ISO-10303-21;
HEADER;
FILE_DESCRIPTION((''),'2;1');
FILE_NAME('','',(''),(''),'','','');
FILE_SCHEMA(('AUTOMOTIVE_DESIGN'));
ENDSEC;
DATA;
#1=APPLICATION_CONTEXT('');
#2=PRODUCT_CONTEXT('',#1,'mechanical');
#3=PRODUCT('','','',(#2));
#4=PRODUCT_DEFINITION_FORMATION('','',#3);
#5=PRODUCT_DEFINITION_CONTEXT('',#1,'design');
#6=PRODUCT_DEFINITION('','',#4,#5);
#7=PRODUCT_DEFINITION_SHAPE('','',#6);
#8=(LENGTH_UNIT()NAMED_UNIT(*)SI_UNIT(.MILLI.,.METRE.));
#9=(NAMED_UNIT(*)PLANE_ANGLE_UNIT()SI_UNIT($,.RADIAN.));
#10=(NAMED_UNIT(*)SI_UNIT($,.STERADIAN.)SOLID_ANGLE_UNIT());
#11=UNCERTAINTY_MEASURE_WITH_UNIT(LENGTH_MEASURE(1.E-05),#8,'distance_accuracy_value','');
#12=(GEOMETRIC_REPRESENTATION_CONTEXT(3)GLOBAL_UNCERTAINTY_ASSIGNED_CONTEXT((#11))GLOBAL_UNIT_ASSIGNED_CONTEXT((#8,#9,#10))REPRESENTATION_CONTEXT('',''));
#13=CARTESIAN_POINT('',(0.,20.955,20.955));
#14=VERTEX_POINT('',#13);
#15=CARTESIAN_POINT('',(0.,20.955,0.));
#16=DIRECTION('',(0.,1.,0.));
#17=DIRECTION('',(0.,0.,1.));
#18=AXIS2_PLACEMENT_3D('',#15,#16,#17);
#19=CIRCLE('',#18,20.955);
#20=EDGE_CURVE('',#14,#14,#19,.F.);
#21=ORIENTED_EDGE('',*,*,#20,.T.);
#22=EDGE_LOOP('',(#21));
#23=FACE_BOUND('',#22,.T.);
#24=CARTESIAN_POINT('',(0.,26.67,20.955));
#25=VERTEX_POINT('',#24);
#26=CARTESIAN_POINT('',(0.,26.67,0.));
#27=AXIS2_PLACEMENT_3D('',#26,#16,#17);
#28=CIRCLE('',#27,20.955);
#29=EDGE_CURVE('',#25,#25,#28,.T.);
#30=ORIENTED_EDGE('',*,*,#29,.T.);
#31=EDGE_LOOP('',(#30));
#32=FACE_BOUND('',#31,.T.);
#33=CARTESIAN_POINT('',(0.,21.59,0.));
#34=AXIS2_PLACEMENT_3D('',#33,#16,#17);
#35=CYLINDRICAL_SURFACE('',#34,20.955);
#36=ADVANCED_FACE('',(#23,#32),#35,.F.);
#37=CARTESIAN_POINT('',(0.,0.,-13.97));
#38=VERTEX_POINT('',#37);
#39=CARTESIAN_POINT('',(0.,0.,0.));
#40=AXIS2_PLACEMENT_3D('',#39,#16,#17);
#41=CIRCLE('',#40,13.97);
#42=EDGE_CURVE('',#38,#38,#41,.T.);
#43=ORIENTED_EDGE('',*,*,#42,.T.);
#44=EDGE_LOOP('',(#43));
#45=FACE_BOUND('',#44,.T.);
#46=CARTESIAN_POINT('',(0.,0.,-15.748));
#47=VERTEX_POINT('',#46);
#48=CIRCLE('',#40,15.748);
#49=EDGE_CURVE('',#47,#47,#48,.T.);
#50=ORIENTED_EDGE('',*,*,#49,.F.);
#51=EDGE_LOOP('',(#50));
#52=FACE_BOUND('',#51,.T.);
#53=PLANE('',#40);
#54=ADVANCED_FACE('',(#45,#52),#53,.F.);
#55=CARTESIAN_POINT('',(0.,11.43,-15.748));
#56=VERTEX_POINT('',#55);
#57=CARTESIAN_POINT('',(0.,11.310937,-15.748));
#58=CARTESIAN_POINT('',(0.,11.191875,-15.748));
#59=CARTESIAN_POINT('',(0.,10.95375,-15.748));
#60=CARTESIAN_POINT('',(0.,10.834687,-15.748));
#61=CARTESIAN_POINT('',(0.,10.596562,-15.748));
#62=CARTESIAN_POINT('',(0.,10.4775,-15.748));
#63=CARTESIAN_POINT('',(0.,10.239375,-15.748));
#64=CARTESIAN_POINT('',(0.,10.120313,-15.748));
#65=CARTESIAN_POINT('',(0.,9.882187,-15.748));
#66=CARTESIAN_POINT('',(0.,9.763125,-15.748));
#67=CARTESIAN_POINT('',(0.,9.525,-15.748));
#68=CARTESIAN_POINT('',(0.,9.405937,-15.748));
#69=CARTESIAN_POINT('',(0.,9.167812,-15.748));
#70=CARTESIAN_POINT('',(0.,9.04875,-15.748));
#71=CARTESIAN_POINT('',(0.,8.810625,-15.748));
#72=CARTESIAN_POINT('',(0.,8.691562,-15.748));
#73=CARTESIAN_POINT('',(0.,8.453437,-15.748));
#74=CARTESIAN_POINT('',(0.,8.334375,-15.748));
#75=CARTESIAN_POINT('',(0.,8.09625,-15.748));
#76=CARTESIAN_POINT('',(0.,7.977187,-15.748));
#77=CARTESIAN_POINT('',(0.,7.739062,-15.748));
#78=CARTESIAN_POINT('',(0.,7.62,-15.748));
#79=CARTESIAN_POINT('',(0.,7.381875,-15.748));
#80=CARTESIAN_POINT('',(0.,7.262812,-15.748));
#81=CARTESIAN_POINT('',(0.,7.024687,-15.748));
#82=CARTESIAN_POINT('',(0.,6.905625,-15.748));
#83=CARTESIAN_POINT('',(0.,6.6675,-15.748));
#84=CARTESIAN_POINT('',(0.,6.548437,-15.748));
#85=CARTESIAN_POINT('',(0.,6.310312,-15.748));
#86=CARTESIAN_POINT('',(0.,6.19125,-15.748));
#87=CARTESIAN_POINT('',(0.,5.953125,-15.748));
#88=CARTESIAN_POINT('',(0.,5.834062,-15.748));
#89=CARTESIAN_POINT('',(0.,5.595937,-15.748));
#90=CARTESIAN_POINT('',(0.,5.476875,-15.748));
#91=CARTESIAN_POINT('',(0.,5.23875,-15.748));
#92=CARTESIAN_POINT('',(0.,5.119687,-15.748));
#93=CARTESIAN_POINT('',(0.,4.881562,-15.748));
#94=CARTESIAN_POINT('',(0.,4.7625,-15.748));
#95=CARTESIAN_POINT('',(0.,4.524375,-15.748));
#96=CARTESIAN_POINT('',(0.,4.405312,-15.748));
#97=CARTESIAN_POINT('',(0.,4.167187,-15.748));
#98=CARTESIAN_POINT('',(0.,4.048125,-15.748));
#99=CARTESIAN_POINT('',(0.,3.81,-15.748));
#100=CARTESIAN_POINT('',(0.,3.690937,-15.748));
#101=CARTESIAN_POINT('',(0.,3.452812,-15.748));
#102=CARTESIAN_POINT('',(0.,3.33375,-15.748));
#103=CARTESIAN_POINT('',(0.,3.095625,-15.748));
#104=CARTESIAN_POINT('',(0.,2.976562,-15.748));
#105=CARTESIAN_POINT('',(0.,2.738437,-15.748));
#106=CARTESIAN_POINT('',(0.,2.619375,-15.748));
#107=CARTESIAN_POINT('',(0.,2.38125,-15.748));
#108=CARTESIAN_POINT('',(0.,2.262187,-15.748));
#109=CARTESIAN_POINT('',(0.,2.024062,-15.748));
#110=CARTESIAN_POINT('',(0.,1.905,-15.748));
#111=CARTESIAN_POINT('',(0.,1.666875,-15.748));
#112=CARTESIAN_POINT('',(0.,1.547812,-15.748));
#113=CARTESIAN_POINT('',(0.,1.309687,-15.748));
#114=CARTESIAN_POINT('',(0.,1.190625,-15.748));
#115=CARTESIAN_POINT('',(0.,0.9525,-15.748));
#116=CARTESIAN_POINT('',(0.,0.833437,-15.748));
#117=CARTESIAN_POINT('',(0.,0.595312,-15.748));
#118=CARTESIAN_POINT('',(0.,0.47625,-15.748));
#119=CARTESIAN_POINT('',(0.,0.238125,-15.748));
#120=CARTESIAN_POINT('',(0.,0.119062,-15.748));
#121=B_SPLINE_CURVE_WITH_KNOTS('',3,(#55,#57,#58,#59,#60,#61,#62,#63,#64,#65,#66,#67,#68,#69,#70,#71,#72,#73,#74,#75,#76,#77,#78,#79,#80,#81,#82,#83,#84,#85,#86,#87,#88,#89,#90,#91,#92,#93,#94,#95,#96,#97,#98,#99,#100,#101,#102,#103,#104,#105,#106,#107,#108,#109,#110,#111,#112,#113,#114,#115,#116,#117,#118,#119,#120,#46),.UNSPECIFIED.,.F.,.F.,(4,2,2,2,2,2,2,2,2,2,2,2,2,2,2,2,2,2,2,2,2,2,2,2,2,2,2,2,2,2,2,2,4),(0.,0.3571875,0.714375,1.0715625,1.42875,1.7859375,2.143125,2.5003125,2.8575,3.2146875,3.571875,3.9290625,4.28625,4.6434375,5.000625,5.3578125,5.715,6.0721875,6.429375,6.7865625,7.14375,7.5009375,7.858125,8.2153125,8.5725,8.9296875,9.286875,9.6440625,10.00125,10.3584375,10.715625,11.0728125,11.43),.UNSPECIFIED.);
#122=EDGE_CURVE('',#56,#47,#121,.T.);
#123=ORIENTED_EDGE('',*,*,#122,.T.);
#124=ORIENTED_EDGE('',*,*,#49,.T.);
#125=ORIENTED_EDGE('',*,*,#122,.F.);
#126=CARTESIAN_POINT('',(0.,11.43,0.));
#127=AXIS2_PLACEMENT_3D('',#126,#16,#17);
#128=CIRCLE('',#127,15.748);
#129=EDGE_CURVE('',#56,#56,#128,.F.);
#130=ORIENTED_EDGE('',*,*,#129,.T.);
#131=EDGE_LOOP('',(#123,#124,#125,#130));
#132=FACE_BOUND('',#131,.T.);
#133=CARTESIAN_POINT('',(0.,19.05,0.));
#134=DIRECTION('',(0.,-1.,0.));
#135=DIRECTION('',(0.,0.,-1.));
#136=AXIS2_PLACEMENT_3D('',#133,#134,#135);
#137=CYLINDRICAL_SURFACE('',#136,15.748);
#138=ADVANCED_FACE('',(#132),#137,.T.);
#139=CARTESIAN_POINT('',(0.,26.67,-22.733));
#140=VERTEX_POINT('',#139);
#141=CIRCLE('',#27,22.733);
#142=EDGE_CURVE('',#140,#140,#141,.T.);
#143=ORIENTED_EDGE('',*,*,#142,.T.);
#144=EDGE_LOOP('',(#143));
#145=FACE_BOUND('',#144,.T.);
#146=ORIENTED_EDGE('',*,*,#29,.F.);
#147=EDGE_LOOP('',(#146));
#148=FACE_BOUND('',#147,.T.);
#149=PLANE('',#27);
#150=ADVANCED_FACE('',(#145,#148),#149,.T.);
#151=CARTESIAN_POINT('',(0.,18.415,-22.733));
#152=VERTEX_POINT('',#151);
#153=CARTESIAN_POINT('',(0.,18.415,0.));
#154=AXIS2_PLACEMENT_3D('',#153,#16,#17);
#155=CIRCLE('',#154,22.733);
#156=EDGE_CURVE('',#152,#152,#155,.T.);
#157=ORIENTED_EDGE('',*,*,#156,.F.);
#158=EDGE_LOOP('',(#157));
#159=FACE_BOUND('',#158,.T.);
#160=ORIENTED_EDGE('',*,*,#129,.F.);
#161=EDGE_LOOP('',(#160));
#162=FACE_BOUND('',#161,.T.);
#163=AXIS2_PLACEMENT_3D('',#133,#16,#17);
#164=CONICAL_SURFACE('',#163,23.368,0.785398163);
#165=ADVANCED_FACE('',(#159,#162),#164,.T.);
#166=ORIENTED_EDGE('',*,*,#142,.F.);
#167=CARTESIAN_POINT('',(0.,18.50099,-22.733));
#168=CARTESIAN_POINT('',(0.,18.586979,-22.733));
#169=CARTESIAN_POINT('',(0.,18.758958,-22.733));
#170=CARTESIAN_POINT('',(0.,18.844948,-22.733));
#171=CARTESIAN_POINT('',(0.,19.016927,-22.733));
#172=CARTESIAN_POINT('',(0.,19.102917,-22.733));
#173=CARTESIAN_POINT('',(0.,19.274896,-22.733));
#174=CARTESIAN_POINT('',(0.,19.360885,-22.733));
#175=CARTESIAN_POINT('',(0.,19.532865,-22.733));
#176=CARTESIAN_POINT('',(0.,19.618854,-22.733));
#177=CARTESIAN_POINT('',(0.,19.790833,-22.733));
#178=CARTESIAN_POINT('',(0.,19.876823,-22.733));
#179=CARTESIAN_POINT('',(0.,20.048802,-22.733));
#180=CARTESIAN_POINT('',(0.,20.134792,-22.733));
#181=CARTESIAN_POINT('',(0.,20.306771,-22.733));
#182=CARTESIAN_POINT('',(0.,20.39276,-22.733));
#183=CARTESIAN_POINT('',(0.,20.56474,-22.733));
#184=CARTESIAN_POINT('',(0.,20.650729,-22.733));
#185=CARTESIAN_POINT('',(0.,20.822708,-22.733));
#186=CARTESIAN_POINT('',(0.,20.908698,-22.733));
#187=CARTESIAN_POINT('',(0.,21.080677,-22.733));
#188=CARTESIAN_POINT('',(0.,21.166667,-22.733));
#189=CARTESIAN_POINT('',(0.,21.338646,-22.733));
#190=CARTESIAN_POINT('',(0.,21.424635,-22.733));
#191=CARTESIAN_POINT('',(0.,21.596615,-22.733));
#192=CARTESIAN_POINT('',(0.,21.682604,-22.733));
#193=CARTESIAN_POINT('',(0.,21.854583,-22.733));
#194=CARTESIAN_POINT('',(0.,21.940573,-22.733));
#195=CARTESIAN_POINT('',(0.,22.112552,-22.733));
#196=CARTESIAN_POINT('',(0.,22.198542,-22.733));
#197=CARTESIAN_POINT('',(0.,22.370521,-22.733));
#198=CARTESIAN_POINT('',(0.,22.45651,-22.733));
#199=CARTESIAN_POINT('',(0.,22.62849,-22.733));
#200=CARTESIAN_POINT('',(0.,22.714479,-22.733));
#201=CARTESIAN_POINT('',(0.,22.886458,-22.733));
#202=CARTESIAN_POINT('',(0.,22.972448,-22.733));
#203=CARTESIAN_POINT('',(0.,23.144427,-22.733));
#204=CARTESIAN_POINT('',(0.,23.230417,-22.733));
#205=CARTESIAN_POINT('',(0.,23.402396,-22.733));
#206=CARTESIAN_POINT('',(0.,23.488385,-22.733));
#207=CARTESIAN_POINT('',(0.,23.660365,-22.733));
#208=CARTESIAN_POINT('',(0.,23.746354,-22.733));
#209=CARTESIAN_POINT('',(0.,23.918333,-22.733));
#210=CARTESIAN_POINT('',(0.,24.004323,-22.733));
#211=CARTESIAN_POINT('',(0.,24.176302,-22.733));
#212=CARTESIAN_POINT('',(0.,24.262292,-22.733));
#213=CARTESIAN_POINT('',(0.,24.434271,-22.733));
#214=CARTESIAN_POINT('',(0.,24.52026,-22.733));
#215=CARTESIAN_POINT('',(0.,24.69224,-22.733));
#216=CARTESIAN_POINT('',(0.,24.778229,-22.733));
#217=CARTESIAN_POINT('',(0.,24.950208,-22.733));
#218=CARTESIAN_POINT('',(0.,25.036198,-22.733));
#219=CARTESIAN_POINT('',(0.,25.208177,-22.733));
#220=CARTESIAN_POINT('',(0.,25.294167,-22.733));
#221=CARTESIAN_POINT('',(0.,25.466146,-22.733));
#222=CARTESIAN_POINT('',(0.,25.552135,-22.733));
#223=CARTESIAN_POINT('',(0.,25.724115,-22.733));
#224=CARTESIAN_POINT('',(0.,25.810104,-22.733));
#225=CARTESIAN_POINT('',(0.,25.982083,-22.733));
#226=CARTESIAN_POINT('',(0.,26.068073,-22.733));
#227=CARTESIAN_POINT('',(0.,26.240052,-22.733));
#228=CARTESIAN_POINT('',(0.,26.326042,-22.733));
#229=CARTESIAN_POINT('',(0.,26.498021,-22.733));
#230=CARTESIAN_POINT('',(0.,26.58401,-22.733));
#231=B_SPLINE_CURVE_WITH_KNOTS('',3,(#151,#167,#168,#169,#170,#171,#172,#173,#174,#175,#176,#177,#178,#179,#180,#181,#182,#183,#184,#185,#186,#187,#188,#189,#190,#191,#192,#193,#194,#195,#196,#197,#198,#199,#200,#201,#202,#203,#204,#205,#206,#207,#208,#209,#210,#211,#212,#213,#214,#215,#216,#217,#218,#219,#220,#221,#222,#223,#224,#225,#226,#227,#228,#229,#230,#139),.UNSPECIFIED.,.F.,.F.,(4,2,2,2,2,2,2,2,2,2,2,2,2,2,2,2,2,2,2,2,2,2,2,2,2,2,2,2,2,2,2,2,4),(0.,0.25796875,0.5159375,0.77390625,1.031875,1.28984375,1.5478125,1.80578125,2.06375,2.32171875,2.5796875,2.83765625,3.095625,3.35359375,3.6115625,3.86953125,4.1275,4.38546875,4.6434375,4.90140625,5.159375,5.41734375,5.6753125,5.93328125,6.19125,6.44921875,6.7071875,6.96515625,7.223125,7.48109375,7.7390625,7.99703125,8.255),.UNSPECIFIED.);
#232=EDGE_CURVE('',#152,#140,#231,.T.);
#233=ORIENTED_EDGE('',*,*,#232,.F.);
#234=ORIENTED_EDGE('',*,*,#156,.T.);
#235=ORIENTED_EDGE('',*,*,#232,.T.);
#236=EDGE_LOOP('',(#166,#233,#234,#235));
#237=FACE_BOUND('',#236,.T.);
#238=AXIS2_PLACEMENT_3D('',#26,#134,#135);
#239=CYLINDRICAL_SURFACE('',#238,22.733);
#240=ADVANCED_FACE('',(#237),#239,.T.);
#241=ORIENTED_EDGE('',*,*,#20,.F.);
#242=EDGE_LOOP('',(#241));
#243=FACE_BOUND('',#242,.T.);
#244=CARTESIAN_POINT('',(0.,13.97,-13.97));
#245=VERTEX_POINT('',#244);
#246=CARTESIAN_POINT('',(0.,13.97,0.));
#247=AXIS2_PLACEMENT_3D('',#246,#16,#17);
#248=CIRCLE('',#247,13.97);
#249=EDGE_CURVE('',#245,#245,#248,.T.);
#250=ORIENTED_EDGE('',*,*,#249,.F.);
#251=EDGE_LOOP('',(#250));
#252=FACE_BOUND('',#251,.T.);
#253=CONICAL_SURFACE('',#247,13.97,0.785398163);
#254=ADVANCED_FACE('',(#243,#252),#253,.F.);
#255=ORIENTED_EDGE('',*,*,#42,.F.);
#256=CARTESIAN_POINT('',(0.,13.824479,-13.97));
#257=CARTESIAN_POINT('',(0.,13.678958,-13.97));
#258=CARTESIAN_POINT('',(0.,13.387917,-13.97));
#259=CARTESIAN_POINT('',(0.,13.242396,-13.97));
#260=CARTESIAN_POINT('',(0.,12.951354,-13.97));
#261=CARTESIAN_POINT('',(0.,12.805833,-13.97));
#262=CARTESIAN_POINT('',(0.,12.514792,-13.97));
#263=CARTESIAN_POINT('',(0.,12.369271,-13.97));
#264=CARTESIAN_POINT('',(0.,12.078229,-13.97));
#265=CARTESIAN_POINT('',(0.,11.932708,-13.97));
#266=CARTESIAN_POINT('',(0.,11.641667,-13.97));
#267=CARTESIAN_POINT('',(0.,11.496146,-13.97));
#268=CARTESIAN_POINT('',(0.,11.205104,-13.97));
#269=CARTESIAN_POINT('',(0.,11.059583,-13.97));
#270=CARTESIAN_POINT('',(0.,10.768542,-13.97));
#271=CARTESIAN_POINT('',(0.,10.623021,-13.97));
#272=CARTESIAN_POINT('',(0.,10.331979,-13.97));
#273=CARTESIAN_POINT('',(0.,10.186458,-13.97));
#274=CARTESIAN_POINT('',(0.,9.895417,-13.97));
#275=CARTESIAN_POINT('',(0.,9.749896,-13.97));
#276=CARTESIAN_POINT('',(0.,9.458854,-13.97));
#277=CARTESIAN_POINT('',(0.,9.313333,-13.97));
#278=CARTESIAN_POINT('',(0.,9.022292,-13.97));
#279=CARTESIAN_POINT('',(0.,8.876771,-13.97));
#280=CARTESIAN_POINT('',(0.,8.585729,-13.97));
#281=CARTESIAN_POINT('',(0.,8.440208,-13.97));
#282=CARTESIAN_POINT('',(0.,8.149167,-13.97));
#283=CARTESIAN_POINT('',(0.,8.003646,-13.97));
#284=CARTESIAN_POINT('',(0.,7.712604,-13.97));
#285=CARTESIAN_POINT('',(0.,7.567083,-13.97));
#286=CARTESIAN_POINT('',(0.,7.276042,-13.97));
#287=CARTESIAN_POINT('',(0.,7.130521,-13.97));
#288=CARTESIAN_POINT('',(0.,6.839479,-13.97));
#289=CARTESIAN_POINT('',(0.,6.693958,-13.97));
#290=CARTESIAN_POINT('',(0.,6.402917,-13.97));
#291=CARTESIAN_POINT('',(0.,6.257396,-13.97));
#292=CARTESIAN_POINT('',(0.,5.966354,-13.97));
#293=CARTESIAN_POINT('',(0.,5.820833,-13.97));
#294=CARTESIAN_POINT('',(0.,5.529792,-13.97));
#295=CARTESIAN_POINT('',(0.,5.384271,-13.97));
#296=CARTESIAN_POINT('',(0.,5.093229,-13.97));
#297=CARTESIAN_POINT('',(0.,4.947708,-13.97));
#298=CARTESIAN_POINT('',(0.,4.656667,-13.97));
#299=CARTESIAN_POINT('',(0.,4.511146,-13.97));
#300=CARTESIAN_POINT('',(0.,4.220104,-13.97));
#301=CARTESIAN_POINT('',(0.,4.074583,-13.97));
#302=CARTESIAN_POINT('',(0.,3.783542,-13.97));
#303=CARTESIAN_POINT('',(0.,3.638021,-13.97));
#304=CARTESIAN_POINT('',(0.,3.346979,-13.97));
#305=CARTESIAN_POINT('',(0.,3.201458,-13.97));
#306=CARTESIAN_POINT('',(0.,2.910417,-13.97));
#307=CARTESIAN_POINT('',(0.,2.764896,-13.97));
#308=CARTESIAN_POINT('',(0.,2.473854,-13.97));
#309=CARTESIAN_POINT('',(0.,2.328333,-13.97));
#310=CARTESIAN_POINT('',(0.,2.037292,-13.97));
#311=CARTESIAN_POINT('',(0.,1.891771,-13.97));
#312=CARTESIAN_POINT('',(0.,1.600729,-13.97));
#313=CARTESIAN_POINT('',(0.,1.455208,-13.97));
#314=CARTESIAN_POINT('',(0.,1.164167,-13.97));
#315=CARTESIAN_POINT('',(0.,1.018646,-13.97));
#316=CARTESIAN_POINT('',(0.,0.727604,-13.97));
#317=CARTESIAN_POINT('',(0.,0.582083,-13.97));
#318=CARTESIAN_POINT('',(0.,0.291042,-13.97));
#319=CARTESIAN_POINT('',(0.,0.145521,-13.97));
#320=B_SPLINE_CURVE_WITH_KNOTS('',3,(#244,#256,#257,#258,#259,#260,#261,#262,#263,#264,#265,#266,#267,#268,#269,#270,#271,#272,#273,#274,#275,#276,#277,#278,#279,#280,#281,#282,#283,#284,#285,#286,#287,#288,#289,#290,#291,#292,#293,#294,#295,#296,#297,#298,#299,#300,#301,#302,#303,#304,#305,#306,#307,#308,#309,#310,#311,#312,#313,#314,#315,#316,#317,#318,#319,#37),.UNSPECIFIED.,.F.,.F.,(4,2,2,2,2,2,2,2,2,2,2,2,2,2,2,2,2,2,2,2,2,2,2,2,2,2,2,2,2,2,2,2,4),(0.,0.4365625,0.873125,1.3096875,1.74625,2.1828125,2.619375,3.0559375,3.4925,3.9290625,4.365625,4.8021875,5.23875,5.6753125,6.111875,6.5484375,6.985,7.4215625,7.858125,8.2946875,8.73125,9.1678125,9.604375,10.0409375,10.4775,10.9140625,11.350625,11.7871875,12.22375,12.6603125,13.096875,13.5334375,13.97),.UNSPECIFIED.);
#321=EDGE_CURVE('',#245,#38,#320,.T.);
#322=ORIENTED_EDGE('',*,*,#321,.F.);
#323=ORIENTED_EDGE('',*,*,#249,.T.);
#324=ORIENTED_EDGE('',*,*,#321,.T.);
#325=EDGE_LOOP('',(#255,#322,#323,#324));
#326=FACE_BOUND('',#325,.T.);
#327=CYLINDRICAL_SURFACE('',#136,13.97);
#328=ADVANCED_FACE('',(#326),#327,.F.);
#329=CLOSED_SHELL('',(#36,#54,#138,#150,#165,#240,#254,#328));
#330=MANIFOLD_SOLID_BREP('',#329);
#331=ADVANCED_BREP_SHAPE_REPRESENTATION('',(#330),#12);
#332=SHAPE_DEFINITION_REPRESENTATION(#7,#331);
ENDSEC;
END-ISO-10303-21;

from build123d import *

# Parameters (mm, degrees)
SKETCH1_R           = 15.748
SKETCH1_R_2         = 13.97
BOSS_EXTRUDE1_DEPTH = 19.05
SKETCH2_R           = 22.733
SKETCH2_R_2         = 13.97
BOSS_EXTRUDE2_DEPTH = 7.62
SKETCH3_R           = 20.955
CUT_EXTRUDE1_DEPTH  = 5.08
CHAMFER1_SIZE       = 7.62
CHAMFER2_SIZE       = 7.62


with BuildPart() as part:
    # Sketch1 → Boss-Extrude1 (new body)
    with BuildSketch(Plane(origin=(0, 0, 0), x_dir=(1, 0, 0), z_dir=(0, 1, 0))):
        with Locations(Location((0, 0, 0), (0, 0, 90))):
            Circle(SKETCH1_R)
        with Locations(Location((0, 0, 0), (0, 0, 90))):
            Circle(SKETCH1_R_2, mode=Mode.SUBTRACT)
    extrude(amount=BOSS_EXTRUDE1_DEPTH)

    # Sketch2 → Boss-Extrude2 (add)
    with BuildSketch(Plane(origin=(0, 19.05, 0), x_dir=(1, 0, 0), z_dir=(0, 1, 0))):
        with Locations(Location((0, 0, 0), (0, 0, 90))):
            Circle(SKETCH2_R)
        with Locations(Location((0, 0, 0), (0, 0, 90))):
            Circle(SKETCH2_R_2, mode=Mode.SUBTRACT)
    extrude(amount=BOSS_EXTRUDE2_DEPTH)

    # Sketch3 → Cut-Extrude1 (cut)
    with BuildSketch(Plane(origin=(0, 26.67, 0), x_dir=(1, 0, 0), z_dir=(0, 1, 0))):
        with Locations(Location((0, 0, 0), (0, 0, 270))):
            Circle(SKETCH3_R)
    extrude(amount=-CUT_EXTRUDE1_DEPTH, mode=Mode.SUBTRACT)

    # Chamfer1
    # the kernel refuses this chamfer: 7.62 mm, written as the material it adds along each edge
    with BuildSketch(Plane(origin=(0, 19.05, 0), x_dir=(0, 0, -1), z_dir=(1, 0, 0))) as chamfer1_piece_1_section:
        Polygon((15.748, -CHAMFER1_SIZE), (15.748 + CHAMFER1_SIZE, 0), (15.748, 0), align=None)
    chamfer1_piece_1 = revolve(axis=Axis((0, 19.05, 0), (0, 1, 0)), mode=Mode.PRIVATE)
    chamfer1_piece_1 = chamfer1_piece_1 & Plane(origin=(0, 14.923095596, 0), x_dir=(0, 0, -1), z_dir=(0, -1, 0)) * Cylinder(22.733, 94, mode=Mode.PRIVATE)
    add(chamfer1_piece_1)

    # Chamfer2
    # the kernel refuses this chamfer: 7.62 mm, written as the material it takes off along each edge
    with BuildSketch(Plane(origin=(0, 21.59, 0), x_dir=(0, 0, -1), z_dir=(-1, 0, 0))) as chamfer2_piece_1_section:
        Polygon((13.97, CHAMFER2_SIZE), (13.97 + CHAMFER2_SIZE, 0), (13.97, 0), align=None)
    chamfer2_piece_1 = revolve(axis=Axis((0, 21.59, 0), (0, -1, 0)), mode=Mode.PRIVATE)
    chamfer2_piece_1 = chamfer2_piece_1 & Plane(origin=(0, 17.459443448, 0), x_dir=(0, 0, 1), z_dir=(0, 1, 0)) * Cylinder(20.955, 87, mode=Mode.PRIVATE)
    add(chamfer2_piece_1, mode=Mode.SUBTRACT)


solid = part.part
